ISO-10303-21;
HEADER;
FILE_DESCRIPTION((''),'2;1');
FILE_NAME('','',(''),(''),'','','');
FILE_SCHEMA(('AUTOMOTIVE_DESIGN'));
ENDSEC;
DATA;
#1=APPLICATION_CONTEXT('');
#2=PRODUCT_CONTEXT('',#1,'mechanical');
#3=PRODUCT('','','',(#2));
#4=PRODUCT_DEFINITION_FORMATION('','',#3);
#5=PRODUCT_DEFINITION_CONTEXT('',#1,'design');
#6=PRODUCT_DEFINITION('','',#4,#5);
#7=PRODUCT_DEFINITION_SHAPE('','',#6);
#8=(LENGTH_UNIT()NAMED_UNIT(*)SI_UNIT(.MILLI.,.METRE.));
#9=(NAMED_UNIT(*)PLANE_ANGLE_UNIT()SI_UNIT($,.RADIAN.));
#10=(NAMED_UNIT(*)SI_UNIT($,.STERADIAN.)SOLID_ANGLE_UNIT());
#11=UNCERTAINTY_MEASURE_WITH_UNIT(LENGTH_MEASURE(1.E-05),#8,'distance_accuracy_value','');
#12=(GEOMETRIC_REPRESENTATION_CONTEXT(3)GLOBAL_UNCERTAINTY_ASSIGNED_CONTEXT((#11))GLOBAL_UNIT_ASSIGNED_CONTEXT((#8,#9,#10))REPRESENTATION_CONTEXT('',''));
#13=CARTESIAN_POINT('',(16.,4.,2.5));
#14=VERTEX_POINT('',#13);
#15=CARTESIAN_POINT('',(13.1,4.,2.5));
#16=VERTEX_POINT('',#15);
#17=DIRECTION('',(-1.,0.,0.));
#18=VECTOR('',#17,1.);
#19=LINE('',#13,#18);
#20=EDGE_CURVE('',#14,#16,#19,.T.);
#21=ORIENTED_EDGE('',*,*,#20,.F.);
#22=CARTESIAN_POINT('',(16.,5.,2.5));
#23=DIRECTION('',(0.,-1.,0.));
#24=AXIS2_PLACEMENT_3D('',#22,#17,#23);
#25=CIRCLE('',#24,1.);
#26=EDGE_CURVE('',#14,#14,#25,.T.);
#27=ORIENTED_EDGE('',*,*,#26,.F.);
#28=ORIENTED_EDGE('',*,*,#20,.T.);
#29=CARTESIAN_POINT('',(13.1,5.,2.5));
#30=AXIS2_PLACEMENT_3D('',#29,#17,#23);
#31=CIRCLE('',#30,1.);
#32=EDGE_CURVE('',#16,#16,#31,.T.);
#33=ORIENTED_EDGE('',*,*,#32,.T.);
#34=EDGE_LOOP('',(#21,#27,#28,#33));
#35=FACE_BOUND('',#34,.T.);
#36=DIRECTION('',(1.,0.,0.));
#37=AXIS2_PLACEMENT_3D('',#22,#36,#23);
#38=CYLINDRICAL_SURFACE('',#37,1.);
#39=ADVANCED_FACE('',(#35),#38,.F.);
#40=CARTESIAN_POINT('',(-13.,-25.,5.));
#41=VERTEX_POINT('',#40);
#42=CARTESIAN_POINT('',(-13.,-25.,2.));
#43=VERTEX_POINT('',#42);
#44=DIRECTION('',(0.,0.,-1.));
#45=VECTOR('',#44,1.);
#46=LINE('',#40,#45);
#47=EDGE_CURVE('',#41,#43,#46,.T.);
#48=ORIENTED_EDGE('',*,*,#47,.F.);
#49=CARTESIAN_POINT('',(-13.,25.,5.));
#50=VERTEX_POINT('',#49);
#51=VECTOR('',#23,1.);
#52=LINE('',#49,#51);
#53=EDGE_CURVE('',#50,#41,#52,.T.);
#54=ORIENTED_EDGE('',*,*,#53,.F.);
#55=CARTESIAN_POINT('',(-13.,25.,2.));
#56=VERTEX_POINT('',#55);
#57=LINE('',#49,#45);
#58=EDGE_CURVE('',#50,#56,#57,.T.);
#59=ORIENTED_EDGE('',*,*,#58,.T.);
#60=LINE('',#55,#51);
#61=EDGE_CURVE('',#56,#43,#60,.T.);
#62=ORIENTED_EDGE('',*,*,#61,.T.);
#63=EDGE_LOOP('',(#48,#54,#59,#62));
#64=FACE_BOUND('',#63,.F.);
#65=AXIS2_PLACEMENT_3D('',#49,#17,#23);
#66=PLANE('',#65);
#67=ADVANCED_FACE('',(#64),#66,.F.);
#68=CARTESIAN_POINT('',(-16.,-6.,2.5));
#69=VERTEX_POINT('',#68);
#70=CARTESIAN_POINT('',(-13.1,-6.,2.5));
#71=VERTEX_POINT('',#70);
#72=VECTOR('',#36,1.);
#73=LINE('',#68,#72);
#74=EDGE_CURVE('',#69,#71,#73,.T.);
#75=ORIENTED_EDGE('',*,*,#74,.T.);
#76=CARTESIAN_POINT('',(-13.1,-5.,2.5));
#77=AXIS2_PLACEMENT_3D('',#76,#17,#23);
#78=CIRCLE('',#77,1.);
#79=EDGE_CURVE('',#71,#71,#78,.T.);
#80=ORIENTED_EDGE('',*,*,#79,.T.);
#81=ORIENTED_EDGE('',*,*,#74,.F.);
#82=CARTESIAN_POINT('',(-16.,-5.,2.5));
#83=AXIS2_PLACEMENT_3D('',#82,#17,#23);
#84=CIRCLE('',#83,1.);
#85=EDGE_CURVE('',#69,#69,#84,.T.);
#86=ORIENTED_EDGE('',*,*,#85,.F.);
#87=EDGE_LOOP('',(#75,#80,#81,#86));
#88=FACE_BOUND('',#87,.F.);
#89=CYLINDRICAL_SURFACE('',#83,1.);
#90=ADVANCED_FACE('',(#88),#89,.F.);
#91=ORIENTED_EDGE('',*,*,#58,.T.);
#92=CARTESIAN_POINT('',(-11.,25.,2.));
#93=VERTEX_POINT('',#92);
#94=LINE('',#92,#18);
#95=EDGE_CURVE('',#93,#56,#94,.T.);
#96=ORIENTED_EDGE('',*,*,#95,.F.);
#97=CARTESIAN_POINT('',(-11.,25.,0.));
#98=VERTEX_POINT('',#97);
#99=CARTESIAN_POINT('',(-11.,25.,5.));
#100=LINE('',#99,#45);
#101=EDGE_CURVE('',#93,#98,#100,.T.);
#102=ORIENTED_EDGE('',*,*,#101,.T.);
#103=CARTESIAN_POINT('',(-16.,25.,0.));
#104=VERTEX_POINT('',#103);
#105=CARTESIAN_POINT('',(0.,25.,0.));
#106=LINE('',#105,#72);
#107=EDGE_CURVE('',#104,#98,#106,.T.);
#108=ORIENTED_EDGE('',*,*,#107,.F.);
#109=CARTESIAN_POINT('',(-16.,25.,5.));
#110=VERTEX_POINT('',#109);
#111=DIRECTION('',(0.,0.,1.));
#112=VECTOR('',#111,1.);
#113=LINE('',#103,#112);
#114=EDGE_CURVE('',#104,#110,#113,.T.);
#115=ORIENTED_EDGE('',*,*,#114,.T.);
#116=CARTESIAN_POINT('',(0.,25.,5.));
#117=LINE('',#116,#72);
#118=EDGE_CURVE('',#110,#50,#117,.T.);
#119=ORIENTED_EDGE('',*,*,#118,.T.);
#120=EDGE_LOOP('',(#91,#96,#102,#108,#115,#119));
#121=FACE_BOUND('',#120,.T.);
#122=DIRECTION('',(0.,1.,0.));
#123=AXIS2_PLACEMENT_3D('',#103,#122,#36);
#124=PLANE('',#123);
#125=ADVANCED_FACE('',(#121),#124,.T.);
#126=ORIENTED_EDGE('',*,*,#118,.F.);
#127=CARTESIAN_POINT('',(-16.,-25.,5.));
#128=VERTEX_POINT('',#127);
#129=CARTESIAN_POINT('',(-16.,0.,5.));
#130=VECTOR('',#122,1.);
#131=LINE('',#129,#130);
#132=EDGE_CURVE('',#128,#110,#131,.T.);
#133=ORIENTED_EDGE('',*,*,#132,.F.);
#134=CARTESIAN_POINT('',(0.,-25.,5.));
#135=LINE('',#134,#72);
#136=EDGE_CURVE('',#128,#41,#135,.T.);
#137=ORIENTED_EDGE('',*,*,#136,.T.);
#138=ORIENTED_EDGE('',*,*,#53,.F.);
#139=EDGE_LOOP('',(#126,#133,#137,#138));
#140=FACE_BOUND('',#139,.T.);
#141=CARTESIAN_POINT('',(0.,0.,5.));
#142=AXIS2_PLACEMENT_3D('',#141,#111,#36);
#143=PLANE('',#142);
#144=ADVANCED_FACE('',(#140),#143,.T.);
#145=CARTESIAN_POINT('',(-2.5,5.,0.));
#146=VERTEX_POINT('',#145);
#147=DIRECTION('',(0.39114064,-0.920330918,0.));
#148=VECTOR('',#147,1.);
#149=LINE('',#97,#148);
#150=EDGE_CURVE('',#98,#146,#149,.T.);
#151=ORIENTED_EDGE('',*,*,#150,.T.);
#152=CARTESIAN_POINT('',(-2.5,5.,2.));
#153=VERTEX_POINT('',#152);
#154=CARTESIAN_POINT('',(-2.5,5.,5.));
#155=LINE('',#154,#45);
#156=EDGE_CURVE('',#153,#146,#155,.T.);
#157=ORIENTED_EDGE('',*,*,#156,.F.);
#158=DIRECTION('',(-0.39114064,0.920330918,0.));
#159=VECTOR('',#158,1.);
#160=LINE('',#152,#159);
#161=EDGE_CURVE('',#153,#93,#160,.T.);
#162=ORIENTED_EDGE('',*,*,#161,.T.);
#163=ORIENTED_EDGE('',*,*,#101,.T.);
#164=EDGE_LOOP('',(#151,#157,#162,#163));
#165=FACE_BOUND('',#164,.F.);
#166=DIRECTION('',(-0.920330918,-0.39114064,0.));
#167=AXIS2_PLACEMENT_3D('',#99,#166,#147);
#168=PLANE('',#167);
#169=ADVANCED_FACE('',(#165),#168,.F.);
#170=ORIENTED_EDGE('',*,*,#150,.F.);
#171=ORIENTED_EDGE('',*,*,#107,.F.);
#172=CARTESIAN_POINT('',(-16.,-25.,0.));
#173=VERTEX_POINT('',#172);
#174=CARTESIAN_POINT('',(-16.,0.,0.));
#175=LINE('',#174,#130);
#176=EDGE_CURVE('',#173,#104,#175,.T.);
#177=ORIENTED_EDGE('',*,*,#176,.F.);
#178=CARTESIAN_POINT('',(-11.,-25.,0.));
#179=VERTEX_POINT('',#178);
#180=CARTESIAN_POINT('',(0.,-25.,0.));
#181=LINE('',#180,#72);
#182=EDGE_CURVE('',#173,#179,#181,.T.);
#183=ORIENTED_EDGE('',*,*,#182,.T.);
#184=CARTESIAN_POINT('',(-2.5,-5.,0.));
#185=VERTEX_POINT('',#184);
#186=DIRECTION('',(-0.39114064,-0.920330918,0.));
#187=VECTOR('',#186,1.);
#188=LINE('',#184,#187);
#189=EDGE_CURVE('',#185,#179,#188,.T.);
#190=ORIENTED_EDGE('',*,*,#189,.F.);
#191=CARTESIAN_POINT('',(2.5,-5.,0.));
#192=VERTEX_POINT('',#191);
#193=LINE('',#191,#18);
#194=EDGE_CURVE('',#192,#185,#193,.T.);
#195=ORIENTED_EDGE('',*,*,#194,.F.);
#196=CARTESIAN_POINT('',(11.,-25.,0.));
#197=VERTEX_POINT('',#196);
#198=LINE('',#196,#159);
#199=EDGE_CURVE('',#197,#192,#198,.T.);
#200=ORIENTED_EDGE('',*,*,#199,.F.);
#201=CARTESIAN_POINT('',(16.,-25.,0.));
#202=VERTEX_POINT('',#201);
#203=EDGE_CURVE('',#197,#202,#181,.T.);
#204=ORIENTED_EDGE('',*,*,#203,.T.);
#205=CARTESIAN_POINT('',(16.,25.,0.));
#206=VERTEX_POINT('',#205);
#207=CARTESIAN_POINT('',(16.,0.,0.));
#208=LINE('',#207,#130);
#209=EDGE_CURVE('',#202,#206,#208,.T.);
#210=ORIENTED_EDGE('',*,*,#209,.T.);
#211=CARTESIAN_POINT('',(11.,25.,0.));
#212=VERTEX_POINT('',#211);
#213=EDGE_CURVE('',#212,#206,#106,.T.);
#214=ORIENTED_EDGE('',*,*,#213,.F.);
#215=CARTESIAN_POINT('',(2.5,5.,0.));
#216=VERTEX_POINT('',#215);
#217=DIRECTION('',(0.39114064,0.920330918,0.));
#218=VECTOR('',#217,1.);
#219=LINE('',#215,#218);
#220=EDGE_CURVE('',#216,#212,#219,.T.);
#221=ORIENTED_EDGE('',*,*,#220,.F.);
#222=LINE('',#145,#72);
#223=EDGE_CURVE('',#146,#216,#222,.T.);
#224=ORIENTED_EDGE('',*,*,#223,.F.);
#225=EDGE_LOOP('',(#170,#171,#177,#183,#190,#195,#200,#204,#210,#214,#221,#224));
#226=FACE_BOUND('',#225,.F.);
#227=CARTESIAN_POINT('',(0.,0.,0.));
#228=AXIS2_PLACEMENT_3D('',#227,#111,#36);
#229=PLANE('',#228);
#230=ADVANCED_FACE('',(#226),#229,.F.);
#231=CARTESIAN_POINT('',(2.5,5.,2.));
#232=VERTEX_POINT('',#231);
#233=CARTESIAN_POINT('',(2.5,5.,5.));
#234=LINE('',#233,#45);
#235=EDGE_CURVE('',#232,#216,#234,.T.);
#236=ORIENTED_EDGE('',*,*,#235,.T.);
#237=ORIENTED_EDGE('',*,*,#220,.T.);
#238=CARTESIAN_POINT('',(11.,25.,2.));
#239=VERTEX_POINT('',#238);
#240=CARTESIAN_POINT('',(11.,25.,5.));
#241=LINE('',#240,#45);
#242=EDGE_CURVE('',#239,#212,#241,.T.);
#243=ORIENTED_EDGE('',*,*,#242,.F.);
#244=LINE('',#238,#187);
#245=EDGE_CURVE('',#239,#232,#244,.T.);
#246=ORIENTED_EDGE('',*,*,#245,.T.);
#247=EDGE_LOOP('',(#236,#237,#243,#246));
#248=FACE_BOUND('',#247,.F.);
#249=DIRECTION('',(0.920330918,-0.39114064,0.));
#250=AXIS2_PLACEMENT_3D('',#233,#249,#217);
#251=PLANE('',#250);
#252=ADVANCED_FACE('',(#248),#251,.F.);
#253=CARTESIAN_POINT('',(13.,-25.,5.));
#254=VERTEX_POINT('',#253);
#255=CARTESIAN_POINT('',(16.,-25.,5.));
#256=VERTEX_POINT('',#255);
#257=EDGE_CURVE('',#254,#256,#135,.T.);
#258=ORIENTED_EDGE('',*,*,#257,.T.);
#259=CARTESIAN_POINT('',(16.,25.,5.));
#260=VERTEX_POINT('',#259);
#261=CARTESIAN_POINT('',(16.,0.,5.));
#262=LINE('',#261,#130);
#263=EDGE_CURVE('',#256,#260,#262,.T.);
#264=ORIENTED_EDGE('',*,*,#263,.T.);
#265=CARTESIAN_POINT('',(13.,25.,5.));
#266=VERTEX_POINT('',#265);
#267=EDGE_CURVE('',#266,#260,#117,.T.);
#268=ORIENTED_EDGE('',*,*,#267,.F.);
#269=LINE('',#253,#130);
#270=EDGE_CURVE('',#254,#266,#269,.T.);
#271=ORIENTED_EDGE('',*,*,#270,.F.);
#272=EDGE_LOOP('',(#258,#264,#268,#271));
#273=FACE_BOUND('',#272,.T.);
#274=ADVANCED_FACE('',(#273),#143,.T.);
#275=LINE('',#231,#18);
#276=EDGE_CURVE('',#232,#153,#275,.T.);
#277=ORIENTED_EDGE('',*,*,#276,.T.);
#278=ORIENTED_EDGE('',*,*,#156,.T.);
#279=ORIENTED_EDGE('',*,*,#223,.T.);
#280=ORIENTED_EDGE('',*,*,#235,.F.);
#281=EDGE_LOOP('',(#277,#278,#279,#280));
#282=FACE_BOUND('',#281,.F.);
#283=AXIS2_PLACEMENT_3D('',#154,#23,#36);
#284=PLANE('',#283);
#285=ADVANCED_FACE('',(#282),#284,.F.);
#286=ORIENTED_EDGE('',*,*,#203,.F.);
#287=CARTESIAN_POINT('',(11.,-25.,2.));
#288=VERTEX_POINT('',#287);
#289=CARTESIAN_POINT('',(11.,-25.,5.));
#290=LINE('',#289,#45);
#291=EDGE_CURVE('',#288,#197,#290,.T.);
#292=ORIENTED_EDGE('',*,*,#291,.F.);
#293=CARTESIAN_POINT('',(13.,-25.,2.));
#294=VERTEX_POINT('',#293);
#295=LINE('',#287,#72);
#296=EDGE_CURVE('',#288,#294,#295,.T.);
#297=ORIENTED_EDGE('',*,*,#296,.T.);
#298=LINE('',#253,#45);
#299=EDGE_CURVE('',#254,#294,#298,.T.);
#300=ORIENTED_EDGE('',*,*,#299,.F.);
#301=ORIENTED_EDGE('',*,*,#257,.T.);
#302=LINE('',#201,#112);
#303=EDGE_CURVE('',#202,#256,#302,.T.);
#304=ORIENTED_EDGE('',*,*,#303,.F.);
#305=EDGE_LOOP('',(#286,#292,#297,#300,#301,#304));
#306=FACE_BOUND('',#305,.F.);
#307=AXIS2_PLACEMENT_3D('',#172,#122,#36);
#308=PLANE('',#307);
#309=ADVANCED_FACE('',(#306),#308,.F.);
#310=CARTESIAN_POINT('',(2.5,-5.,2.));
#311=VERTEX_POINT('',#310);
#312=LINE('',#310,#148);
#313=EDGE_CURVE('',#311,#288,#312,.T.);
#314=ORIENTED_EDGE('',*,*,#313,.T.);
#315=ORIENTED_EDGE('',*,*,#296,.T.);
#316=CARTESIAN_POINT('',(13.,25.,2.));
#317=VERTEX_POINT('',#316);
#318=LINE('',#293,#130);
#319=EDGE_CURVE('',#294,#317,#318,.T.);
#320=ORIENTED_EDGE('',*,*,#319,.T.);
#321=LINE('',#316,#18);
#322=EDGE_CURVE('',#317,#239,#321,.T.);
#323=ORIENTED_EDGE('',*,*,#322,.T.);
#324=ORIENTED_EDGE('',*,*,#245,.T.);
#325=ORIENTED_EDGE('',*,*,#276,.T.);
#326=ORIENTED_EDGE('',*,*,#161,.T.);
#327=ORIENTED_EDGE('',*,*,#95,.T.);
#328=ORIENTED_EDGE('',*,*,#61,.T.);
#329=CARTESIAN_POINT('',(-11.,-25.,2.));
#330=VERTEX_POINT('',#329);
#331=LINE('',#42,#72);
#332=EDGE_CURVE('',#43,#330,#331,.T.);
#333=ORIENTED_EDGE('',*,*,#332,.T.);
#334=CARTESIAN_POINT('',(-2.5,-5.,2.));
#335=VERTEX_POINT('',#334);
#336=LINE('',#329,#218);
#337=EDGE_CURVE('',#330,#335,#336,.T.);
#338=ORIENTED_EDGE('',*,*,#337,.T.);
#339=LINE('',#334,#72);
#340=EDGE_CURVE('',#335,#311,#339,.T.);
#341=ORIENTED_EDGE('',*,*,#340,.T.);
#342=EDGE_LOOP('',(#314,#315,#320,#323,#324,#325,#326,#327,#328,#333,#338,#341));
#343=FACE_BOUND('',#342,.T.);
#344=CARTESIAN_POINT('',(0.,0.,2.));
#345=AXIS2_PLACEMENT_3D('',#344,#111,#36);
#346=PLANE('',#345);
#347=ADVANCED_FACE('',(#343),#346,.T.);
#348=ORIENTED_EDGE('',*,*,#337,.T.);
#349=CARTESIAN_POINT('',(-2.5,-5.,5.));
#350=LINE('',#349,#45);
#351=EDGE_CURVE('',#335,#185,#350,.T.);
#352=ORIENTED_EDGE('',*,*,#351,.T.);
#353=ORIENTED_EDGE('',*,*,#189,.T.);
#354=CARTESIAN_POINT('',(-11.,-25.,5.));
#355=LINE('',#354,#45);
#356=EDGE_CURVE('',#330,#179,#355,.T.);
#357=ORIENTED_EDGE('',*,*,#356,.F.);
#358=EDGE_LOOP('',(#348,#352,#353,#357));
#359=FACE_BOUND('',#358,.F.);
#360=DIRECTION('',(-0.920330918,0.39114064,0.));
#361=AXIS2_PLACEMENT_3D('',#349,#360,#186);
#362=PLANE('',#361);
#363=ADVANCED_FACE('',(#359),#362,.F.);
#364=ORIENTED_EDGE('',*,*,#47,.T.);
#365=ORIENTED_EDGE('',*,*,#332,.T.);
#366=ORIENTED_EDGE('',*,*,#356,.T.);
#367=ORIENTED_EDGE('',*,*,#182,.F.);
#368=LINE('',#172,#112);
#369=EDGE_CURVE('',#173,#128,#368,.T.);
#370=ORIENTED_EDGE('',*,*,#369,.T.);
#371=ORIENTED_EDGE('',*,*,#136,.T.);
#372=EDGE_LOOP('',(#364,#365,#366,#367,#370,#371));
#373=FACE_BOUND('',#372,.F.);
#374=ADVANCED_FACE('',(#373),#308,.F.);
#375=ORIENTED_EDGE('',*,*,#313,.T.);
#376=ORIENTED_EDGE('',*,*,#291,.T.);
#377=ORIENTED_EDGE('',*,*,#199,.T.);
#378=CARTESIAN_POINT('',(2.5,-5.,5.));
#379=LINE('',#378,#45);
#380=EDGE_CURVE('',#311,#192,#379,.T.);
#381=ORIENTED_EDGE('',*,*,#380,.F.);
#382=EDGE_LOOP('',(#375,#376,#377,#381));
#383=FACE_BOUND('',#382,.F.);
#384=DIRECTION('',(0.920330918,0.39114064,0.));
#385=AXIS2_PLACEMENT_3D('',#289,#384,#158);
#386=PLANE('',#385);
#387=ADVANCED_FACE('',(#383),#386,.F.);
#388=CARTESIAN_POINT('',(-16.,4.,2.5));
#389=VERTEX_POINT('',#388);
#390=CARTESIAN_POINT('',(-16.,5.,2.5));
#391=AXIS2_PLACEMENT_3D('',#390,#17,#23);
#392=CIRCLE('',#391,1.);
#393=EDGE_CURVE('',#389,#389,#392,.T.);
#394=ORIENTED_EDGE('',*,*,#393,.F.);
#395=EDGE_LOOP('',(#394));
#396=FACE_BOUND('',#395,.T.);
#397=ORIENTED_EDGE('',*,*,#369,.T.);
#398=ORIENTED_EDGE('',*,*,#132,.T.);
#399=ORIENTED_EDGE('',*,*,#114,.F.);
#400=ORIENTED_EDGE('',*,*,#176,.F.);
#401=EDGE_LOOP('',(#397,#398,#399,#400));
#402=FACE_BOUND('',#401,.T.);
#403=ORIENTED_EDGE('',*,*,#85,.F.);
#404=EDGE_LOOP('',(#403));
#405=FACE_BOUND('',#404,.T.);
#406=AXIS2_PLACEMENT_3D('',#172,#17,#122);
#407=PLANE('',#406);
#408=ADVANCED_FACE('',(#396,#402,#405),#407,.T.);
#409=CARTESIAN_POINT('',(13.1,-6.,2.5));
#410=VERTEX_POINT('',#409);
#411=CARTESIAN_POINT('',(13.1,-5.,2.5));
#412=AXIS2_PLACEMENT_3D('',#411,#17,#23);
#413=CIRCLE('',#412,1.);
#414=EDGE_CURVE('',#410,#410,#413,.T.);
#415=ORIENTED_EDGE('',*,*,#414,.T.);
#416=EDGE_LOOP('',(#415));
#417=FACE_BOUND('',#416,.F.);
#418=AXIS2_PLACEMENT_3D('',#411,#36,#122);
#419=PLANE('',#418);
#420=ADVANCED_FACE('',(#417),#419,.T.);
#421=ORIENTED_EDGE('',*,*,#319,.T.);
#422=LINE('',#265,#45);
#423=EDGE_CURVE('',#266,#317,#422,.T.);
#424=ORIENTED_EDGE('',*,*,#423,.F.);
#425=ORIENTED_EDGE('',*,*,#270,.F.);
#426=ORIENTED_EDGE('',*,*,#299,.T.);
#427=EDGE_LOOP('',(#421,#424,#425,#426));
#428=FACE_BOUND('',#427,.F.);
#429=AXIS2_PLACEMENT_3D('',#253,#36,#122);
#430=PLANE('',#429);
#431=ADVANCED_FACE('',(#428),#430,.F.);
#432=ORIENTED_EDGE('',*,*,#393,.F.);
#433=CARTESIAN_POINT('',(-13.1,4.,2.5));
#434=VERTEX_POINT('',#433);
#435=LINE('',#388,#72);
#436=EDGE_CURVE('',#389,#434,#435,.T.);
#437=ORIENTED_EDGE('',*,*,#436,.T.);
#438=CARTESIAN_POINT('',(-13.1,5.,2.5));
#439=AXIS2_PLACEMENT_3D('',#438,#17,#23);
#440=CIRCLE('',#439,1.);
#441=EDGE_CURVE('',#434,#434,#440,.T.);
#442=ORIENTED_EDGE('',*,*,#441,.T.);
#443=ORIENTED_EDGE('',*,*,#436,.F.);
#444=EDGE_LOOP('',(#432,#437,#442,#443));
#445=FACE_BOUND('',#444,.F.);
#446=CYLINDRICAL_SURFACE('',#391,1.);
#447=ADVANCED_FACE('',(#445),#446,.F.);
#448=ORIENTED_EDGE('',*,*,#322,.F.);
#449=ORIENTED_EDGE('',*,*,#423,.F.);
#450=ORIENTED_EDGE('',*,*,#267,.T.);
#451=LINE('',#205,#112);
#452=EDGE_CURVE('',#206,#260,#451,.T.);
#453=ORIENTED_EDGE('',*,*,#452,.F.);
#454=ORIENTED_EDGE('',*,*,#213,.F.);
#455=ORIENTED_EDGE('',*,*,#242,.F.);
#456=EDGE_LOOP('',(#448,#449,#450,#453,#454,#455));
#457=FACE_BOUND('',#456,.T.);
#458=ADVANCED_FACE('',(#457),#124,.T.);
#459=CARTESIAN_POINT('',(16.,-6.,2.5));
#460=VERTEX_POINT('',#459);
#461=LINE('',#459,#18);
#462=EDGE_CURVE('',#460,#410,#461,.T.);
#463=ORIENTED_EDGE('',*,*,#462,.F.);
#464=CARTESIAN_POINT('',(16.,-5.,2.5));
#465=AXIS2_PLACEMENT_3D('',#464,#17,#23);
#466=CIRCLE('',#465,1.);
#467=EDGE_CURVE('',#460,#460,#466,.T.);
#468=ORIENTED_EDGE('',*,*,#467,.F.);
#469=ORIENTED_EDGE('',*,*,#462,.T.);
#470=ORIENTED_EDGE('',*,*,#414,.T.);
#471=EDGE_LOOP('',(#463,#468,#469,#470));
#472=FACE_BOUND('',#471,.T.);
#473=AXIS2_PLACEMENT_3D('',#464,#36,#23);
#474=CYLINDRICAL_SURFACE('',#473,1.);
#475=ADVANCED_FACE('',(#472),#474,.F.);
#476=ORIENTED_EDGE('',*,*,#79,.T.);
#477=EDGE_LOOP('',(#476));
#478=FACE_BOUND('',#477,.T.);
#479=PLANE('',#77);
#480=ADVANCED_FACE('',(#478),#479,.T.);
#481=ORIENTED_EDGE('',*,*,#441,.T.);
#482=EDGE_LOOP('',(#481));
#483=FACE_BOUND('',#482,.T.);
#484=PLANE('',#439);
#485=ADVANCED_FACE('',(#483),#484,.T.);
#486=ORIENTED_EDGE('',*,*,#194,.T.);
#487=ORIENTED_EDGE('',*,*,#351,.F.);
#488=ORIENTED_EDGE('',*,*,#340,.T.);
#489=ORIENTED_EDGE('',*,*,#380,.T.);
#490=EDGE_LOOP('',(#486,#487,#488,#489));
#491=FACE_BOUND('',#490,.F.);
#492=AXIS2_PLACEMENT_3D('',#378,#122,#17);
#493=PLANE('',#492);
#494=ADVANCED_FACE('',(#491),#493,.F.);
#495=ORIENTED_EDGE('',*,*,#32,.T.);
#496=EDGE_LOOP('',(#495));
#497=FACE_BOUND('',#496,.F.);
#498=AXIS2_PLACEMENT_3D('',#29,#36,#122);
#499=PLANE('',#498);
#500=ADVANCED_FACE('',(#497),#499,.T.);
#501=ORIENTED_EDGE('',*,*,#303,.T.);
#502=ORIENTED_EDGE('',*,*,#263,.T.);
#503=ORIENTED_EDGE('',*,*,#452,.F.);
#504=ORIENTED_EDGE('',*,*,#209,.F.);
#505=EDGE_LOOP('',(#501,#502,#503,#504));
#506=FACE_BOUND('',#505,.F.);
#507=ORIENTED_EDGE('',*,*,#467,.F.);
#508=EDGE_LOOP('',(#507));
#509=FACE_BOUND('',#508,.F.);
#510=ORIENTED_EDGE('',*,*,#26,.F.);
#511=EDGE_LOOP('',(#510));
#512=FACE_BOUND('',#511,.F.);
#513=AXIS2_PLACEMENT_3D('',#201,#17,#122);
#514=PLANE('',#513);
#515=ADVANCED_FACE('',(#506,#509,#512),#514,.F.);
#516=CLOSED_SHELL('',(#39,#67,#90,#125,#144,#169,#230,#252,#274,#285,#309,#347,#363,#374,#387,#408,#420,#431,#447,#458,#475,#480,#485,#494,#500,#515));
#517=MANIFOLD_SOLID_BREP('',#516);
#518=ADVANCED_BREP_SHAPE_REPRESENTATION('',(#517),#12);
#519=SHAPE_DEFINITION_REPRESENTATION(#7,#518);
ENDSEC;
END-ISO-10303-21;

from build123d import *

# Parameters (mm, degrees)
F0_W     = 32
F0_H     = 50
F1_DEPTH = 5
F3_DEPTH = 5
F4_R     = 1
F5_DEPTH = 2.9
F7_DEPTH = 3


# Not quite as in the source:
# - a pattern or mirror of a feature is missing from the dataset's text; its kind, count and spacing are read off the source's solid


with BuildPart() as f1:
    # F0 (on Top) → F1 (new body)
    with BuildSketch(Plane.XY):
        Rectangle(F0_W, F0_H)
    extrude(amount=F1_DEPTH)

    # F2 (on face) → F3 (cut, through all)
    with BuildSketch(Plane.XY.offset(5)):
        Polygon((11, 25), (-11, 25), (-2.5, 5), (0, 5), (2.5, 5), align=None)
        Polygon((0, -5), (-2.5, -5), (-11, -25), (11, -25), (2.5, -5), align=None)
    extrude(amount=-F3_DEPTH, mode=Mode.SUBTRACT)

    # F4 (on face) → F5 (cut)
    with BuildSketch(Plane(origin=(-16, 0, 0), x_dir=(0, -1, 0), z_dir=(-1, 0, 0))):
        with Locations((-5, 2.5)):
            Circle(F4_R)
        with Locations((5, 2.5)):
            Circle(F4_R)
    f5 = extrude(amount=-F5_DEPTH, mode=Mode.SUBTRACT)

    # F5_copies: F5 across plane
    add(f5.mirror(Plane(origin=(0, 0, 0), x_dir=(0, 0, 1), z_dir=(1, 0, 0))), mode=Mode.SUBTRACT)

    # F6 (on face) → F7 (cut)
    with BuildSketch(Plane.XY.offset(5)):
        Polygon((-11, 25), (-13, 25), (-13, -25), (-11, -25), (-2.5, -5), (2.5, -5), (11, -25), (13, -25), (13, 25), (11, 25), (2.5, 5), (-2.5, 5), align=None)
    extrude(amount=-F7_DEPTH, mode=Mode.SUBTRACT)


solid = f1.part
